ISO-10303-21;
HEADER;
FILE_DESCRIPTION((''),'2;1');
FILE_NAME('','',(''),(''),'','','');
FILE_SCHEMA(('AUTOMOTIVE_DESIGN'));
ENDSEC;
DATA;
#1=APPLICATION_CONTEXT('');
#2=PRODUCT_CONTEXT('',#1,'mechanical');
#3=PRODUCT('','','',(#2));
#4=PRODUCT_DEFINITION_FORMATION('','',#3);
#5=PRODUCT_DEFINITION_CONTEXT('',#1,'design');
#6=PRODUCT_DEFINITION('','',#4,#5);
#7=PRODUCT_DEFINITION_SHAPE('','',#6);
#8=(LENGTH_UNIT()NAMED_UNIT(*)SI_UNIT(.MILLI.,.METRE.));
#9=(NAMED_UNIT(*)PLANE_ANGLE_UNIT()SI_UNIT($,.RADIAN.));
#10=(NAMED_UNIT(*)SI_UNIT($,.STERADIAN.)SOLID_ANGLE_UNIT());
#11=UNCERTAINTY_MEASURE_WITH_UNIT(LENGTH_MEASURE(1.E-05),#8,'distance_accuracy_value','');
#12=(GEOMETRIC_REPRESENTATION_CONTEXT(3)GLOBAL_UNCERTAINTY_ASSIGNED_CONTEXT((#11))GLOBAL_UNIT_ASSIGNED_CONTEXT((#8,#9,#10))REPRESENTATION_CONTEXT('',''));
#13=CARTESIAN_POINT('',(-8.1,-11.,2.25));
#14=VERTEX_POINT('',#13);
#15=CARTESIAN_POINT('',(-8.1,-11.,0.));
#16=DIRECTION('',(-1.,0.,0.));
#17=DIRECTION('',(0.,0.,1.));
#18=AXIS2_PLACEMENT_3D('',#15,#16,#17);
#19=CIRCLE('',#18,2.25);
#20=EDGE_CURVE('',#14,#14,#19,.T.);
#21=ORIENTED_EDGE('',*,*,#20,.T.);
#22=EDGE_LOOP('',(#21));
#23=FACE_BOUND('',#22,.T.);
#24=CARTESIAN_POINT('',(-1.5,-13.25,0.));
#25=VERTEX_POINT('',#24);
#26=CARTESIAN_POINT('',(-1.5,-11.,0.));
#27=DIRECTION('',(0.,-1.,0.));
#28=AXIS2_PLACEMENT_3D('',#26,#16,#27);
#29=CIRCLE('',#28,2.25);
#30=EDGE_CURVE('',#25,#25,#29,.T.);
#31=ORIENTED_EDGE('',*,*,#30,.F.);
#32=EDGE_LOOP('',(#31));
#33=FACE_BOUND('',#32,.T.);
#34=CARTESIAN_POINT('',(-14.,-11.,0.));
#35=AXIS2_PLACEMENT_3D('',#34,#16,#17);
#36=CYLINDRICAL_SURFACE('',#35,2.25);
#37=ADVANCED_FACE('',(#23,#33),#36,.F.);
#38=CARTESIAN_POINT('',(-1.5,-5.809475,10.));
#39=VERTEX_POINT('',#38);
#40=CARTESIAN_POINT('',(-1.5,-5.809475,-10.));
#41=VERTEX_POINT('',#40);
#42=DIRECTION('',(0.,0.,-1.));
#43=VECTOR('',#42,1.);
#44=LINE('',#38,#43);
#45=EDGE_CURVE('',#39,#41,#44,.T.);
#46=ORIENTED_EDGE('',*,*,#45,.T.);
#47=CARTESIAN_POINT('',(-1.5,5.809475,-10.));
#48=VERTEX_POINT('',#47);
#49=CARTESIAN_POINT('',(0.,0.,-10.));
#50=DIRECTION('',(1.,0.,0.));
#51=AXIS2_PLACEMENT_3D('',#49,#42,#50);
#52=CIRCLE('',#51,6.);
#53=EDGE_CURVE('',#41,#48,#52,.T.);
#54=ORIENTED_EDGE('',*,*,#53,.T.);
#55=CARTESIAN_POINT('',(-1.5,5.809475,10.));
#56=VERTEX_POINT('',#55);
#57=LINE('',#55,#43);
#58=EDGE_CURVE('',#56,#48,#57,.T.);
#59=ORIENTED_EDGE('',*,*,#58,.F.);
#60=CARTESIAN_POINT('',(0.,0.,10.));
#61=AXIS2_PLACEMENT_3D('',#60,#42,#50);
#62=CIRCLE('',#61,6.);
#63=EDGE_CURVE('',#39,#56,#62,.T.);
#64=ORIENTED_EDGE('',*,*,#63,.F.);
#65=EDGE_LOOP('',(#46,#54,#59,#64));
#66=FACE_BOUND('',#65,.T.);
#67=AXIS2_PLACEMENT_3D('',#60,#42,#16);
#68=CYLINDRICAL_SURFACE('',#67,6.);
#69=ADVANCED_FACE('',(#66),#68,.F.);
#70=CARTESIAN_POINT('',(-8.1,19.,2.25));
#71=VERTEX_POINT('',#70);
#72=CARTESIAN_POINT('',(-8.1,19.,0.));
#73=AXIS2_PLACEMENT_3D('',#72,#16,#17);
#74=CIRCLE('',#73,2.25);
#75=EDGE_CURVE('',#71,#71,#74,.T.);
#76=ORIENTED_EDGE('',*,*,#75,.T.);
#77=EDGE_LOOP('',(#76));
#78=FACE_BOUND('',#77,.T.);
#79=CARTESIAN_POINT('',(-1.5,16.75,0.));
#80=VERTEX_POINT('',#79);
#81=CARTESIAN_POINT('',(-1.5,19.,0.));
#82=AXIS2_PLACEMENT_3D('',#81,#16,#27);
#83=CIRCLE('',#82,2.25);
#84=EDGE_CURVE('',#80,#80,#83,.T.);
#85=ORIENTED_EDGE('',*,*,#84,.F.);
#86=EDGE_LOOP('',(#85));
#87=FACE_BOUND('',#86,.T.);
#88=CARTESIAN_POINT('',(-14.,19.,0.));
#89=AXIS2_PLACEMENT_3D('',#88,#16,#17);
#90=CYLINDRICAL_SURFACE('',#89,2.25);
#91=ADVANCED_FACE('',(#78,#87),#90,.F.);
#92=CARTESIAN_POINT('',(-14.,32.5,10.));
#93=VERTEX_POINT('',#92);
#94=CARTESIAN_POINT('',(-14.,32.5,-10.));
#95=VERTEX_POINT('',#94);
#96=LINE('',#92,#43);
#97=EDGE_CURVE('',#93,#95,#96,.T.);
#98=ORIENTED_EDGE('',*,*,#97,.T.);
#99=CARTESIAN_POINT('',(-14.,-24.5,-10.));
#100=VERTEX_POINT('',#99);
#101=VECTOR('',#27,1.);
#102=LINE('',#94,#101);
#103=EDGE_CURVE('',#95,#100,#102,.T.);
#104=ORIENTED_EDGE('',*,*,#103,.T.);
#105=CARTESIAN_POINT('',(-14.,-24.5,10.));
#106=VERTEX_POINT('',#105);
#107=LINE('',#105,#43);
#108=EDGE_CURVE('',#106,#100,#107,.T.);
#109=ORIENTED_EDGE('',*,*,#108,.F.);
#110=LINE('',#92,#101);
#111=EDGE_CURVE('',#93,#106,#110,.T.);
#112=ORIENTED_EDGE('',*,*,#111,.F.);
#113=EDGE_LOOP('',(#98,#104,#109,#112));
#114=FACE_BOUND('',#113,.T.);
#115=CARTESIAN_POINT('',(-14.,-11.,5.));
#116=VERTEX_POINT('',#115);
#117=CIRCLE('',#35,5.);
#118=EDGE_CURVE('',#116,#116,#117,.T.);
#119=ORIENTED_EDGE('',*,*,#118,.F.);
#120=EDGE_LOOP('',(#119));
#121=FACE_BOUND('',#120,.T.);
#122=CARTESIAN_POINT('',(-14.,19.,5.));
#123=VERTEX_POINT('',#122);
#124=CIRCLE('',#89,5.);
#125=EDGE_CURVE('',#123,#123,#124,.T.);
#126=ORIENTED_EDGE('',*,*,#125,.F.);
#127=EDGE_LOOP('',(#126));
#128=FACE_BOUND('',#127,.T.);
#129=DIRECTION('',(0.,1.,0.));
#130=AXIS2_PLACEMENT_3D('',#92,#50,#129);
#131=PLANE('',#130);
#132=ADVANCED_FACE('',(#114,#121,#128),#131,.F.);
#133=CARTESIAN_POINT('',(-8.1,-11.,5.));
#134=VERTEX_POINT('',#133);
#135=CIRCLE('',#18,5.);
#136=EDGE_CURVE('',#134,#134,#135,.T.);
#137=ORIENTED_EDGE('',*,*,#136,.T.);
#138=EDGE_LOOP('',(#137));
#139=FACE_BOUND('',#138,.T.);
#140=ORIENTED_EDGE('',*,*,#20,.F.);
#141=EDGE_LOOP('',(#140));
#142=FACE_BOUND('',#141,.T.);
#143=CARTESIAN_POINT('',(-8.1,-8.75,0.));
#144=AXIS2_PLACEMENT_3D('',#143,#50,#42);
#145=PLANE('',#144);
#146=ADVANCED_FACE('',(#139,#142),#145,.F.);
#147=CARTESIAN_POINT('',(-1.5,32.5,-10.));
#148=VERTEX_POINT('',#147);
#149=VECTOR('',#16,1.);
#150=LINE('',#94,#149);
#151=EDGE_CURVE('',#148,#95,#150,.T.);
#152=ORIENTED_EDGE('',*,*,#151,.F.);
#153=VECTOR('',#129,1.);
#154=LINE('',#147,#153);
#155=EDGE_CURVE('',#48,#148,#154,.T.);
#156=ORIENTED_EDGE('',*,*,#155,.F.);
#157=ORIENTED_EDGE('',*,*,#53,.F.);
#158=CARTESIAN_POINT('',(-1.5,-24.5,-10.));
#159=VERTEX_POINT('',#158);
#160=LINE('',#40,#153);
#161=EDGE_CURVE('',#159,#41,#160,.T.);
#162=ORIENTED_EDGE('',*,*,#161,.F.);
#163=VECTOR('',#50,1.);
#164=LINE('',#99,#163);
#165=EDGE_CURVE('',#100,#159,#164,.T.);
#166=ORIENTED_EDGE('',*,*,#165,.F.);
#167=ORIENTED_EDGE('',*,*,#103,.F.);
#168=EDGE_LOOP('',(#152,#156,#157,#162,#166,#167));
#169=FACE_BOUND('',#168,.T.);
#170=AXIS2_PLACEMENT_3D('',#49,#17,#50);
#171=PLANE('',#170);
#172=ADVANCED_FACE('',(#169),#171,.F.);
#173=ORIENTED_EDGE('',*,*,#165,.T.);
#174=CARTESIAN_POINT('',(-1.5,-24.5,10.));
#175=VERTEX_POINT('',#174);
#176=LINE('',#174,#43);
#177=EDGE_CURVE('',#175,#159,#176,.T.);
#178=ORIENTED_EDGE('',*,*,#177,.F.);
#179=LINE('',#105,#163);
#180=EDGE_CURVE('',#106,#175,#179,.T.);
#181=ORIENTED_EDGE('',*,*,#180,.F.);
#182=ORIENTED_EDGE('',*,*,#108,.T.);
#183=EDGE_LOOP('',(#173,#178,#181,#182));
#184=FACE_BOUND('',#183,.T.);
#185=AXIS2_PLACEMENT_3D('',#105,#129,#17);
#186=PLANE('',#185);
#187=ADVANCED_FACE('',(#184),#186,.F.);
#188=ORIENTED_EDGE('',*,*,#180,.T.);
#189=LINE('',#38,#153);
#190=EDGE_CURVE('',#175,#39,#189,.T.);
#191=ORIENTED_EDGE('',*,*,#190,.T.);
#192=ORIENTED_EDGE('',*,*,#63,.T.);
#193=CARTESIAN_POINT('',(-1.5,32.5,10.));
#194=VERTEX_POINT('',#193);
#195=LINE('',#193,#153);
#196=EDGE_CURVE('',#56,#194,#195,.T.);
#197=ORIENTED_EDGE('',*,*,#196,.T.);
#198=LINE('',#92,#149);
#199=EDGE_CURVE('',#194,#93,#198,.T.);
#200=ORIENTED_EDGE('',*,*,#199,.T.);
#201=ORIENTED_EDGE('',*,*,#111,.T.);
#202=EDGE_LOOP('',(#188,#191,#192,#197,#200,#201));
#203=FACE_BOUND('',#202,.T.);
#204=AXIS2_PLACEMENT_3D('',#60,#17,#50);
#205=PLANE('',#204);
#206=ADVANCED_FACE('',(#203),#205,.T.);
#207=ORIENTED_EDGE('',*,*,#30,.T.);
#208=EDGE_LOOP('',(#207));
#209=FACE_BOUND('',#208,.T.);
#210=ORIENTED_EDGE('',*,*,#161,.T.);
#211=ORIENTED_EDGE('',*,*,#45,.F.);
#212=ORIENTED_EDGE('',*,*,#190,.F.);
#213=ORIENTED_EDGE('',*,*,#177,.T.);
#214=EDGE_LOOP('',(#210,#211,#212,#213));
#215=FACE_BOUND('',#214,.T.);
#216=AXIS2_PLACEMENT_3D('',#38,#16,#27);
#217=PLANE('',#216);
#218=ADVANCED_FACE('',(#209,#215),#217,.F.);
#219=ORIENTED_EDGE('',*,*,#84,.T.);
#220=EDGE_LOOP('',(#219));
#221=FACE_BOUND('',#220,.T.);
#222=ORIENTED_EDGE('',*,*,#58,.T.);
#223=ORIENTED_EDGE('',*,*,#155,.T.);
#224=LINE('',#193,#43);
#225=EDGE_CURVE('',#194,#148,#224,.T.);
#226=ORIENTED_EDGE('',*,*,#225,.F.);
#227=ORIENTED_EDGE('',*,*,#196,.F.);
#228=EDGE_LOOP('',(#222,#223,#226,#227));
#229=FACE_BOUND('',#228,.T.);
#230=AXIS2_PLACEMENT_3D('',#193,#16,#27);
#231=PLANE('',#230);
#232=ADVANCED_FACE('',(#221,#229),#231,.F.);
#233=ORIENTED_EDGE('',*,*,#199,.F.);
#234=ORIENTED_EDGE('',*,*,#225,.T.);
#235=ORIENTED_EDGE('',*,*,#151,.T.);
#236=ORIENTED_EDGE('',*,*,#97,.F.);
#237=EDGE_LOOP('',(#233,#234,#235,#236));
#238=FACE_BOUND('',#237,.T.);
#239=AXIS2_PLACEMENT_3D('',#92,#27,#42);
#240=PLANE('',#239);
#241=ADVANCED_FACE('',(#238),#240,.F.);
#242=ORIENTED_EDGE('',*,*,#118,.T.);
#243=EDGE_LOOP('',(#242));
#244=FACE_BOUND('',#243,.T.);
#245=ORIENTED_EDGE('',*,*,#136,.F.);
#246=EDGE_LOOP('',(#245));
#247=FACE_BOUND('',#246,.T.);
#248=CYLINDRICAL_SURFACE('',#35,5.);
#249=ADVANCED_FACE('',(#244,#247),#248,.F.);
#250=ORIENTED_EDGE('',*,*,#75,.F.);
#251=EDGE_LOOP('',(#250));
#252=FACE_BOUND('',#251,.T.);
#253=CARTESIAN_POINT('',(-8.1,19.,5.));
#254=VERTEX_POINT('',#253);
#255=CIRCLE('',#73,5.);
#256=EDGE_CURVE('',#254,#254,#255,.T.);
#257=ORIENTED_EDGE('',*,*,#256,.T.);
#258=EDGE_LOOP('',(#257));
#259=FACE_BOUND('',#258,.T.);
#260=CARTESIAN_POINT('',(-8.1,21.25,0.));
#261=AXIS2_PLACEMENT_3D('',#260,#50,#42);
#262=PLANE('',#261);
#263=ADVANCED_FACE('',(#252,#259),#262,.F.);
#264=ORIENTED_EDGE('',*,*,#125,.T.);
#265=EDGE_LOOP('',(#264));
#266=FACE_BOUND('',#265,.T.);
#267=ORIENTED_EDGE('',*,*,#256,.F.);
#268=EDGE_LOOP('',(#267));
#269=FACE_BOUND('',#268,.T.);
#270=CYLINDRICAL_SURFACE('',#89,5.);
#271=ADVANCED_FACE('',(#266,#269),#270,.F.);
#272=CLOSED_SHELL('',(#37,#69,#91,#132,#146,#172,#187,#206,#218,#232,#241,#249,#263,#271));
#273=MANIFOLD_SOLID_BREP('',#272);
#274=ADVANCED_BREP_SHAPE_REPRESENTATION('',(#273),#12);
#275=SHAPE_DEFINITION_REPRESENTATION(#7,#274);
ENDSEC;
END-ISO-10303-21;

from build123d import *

# Parameters (mm, degrees)
BOSS_EXTRUDE1_DEPTH                          = 10
BOSS_EXTRUDE1_2_DEPTH                        = 10
CBORE_FOR_M5_HEX_SOCKET_HEAD_CAP_SCR_2_COUNT = 2
CBORE_FOR_M5_HEX_SOCKET_HEAD_CAP_SCR_2_PITCH = 30
BOSS_EXTRUDE2_DEPTH                          = 13
BOSS_EXTRUDE3_DEPTH                          = 23
BOSS_EXTRUDE4_DEPTH                          = 27
SKETCH8_R                                    = 2.1
CUT_EXTRUDE1_DEPTH                           = 52.298148115
CHAMFER1_SIZE                                = 16
CUT_EXTRUDE2_DEPTH                           = 6
SKETCH10_R                                   = 5
SKETCH10_R_2                                 = 2.1
BOSS_EXTRUDE5_DEPTH                          = 0.7
CHAMFER2_SIZE                                = 1


with BuildPart() as part:
    # Sketch1 → Boss-Extrude1 (new, symmetric)
    with BuildSketch(Plane.XY):
        with BuildLine():
            Line((-14, 32.5), (-1.5, 32.5))
            Line((-1.5, 32.5), (-1.5, 5.809475019))
            ThreePointArc((-1.5, 5.809475019), (-6, 0), (-1.5, -5.809475019))
            Line((-1.5, -5.809475019), (-1.5, -24.5))
            Line((-1.5, -24.5), (-14, -24.5))
            Line((-14, -24.5), (-14, 32.5))
        make_face()
    extrude(amount=BOSS_EXTRUDE1_DEPTH, both=True)


with BuildPart() as body_2:
    # Sketch1 → Boss-Extrude1 2 (new, symmetric)
    with BuildSketch(Plane.XY):
        with BuildLine():
            Line((15, 33.5), (15, 23))
            Line((15, 23), (15.6, 23))
            Line((15.6, 23), (15.6, 15))
            Line((15.6, 15), (15, 15))
            Line((15, 15), (15, -7))
            Line((15, -7), (15.6, -7))
            Line((15.6, -7), (15.6, -15))
            Line((15.6, -15), (15, -15))
            Line((15, -15), (15, -25.5))
            Line((15, -25.5), (1.5, -25.5))
            Line((1.5, -25.5), (1.5, -5.809475019))
            ThreePointArc((1.5, -5.809475019), (6, 0), (1.5, 5.809475019))
            Line((1.5, 5.809475019), (1.5, 33.5))
            Line((1.5, 33.5), (15, 33.5))
        make_face()
    extrude(amount=BOSS_EXTRUDE1_2_DEPTH, both=True)


with BuildPart() as cbore_for_m5_hex_socket_head_cap_screw1_tool:
    # Sketch2 → CBORE for M5 Hex Socket Head Cap Screw1 (revolve)
    with BuildSketch(Plane(origin=(-14, -11, 0), x_dir=(0, 0, 1), z_dir=(0, 1, 0))):
        Polygon((0, 0), (0, 29.6), (2.25, 29.6), (2.25, 5.9), (5, 5.9), (5, 0), align=None)
    cbore_for_m5_hex_socket_head_cap_screw1 = revolve(axis=Axis((-20.35, -11, 0), (1, 0, 0)))


with BuildPart() as part_1:
    add(part.part)

    # CBORE for M5 Hex Socket Head Cap Screw1: cut by cbore_for_m5_hex_socket_head_cap_screw1_tool
    add(cbore_for_m5_hex_socket_head_cap_screw1_tool.part, mode=Mode.SUBTRACT)


with BuildPart() as body_2_1:
    add(body_2.part)

    # CBORE for M5 Hex Socket Head Cap Screw1: cut by cbore_for_m5_hex_socket_head_cap_screw1_tool
    add(cbore_for_m5_hex_socket_head_cap_screw1_tool.part, mode=Mode.SUBTRACT)


with BuildPart() as cbore_for_m5_hex_socket_head_cap_scr_2_tool:
    # CBORE for M5 Hex Socket Head Cap Scr 2: CBORE for M5 Hex Socket Head Cap Screw1 ×2
    with Locations(*[(0, i * CBORE_FOR_M5_HEX_SOCKET_HEAD_CAP_SCR_2_PITCH, 0) for i in range(1, CBORE_FOR_M5_HEX_SOCKET_HEAD_CAP_SCR_2_COUNT)]):
        add(cbore_for_m5_hex_socket_head_cap_screw1)


with BuildPart() as part_2:
    add(part_1.part)

    # CBORE for M5 Hex Socket Head Cap Scr 2: cut by cbore_for_m5_hex_socket_head_cap_scr_2_tool
    add(cbore_for_m5_hex_socket_head_cap_scr_2_tool.part, mode=Mode.SUBTRACT)


with BuildPart() as body_2_2:
    add(body_2_1.part)

    # CBORE for M5 Hex Socket Head Cap Scr 2: cut by cbore_for_m5_hex_socket_head_cap_scr_2_tool
    add(cbore_for_m5_hex_socket_head_cap_scr_2_tool.part, mode=Mode.SUBTRACT)

    # Sketch4 → Boss-Extrude2 (add)
    with BuildSketch(Plane.XY.offset(10)):
        Polygon((1.5, 5.809475019), (1.5, -5.809475019), (1.5, -25.5), (15, -25.5), (15, -15), (15.6, -15), (15.6, -7), (15, -7), (15, 15), (15.6, 15), (15.6, 23), (15, 23), (15, 33.5), (1.5, 33.5), align=None)
    extrude(amount=BOSS_EXTRUDE2_DEPTH)

    # Sketch5 → Boss-Extrude3 (add)
    with BuildSketch(Plane(origin=(0, 0, -10), x_dir=(-1, 0, 0), z_dir=(0, 0, -1))):
        with BuildLine():
            Line((-15, -25.5), (-1.5, -25.5))
            Line((-1.5, -25.5), (-1.5, -5.809475019))
            ThreePointArc((-1.5, -5.809475019), (-6, 0), (-1.5, 5.809475019))
            Line((-1.5, 5.809475019), (-1.5, 33.5))
            Line((-1.5, 33.5), (-15, 33.5))
            Line((-15, 33.5), (-15, 23))
            Line((-15, 23), (-15.6, 23))
            Line((-15.6, 23), (-15.6, 15))
            Line((-15.6, 15), (-15, 15))
            Line((-15, 15), (-15, -7))
            Line((-15, -7), (-15.6, -7))
            Line((-15.6, -7), (-15.6, -15))
            Line((-15.6, -15), (-15, -15))
            Line((-15, -15), (-15, -25.5))
        make_face()
    extrude(amount=BOSS_EXTRUDE3_DEPTH)

    # Sketch7 → Boss-Extrude4 (add)
    with BuildSketch(Plane(origin=(0, 33.5, 0), x_dir=(1, 0, 0), z_dir=(0, 1, 0))):
        Polygon((1.5, 33), (-4.9, 33), (-4.9, 17.4), (1.5, 11), align=None)
    extrude(amount=-BOSS_EXTRUDE4_DEPTH)

    # Sketch8 → Cut-Extrude1 (cut, through all)
    with BuildSketch(Plane.ZY.offset(4.9)):
        with Locations((-25, 19)):
            Circle(SKETCH8_R)
    extrude(amount=-CUT_EXTRUDE1_DEPTH, mode=Mode.SUBTRACT)

    # Chamfer1
    chamfer1_edges = [body_2_2.edges().sort_by_distance(p)[0] for p in [
        (8.25, -25.5, -33),
    ]]
    chamfer(chamfer1_edges, length=CHAMFER1_SIZE)

    # Sketch9 → Cut-Extrude2 (cut)
    with BuildSketch(Plane(origin=(15.6, 0, 0), x_dir=(0, 0, -1), z_dir=(1, 0, 0))):
        Polygon((29.099186911, 19), (27.049593456, 22.55), (22.950406544, 22.55), (20.900813089, 19), (22.950406544, 15.45), (27.049593456, 15.45), align=None)
    extrude(amount=-CUT_EXTRUDE2_DEPTH, mode=Mode.SUBTRACT)

    # Sketch10 → Boss-Extrude5 (add)
    with BuildSketch(Plane.ZY.offset(4.9)):
        with Locations((-25, 19)):
            Circle(SKETCH10_R)
        with Locations((-25, 19)):
            Circle(SKETCH10_R_2, mode=Mode.SUBTRACT)
    extrude(amount=BOSS_EXTRUDE5_DEPTH)

    # Chamfer2
    # the kernel refuses this chamfer: 1 mm, written as the material it takes off along each edge
    with BuildSketch(Plane(origin=(-5.6, 19, -25), x_dir=(0, 0, 1), z_dir=(0, -1, 0))) as chamfer2_piece_1_section:
        Polygon((5, -CHAMFER2_SIZE), (5 - CHAMFER2_SIZE, 0), (5, 0), align=None)
    chamfer2_piece_1 = revolve(axis=Axis((-5.6, 19, -25), (-1, 0, 0)), mode=Mode.PRIVATE)
    chamfer2_piece_1 = split(chamfer2_piece_1, bisect_by=Plane(origin=(-4.9, 19, -29.353058273), z_dir=(-1, 0, 0)), keep=Keep.TOP, mode=Mode.PRIVATE)
    add(chamfer2_piece_1, mode=Mode.SUBTRACT)


solid = part_2.part
